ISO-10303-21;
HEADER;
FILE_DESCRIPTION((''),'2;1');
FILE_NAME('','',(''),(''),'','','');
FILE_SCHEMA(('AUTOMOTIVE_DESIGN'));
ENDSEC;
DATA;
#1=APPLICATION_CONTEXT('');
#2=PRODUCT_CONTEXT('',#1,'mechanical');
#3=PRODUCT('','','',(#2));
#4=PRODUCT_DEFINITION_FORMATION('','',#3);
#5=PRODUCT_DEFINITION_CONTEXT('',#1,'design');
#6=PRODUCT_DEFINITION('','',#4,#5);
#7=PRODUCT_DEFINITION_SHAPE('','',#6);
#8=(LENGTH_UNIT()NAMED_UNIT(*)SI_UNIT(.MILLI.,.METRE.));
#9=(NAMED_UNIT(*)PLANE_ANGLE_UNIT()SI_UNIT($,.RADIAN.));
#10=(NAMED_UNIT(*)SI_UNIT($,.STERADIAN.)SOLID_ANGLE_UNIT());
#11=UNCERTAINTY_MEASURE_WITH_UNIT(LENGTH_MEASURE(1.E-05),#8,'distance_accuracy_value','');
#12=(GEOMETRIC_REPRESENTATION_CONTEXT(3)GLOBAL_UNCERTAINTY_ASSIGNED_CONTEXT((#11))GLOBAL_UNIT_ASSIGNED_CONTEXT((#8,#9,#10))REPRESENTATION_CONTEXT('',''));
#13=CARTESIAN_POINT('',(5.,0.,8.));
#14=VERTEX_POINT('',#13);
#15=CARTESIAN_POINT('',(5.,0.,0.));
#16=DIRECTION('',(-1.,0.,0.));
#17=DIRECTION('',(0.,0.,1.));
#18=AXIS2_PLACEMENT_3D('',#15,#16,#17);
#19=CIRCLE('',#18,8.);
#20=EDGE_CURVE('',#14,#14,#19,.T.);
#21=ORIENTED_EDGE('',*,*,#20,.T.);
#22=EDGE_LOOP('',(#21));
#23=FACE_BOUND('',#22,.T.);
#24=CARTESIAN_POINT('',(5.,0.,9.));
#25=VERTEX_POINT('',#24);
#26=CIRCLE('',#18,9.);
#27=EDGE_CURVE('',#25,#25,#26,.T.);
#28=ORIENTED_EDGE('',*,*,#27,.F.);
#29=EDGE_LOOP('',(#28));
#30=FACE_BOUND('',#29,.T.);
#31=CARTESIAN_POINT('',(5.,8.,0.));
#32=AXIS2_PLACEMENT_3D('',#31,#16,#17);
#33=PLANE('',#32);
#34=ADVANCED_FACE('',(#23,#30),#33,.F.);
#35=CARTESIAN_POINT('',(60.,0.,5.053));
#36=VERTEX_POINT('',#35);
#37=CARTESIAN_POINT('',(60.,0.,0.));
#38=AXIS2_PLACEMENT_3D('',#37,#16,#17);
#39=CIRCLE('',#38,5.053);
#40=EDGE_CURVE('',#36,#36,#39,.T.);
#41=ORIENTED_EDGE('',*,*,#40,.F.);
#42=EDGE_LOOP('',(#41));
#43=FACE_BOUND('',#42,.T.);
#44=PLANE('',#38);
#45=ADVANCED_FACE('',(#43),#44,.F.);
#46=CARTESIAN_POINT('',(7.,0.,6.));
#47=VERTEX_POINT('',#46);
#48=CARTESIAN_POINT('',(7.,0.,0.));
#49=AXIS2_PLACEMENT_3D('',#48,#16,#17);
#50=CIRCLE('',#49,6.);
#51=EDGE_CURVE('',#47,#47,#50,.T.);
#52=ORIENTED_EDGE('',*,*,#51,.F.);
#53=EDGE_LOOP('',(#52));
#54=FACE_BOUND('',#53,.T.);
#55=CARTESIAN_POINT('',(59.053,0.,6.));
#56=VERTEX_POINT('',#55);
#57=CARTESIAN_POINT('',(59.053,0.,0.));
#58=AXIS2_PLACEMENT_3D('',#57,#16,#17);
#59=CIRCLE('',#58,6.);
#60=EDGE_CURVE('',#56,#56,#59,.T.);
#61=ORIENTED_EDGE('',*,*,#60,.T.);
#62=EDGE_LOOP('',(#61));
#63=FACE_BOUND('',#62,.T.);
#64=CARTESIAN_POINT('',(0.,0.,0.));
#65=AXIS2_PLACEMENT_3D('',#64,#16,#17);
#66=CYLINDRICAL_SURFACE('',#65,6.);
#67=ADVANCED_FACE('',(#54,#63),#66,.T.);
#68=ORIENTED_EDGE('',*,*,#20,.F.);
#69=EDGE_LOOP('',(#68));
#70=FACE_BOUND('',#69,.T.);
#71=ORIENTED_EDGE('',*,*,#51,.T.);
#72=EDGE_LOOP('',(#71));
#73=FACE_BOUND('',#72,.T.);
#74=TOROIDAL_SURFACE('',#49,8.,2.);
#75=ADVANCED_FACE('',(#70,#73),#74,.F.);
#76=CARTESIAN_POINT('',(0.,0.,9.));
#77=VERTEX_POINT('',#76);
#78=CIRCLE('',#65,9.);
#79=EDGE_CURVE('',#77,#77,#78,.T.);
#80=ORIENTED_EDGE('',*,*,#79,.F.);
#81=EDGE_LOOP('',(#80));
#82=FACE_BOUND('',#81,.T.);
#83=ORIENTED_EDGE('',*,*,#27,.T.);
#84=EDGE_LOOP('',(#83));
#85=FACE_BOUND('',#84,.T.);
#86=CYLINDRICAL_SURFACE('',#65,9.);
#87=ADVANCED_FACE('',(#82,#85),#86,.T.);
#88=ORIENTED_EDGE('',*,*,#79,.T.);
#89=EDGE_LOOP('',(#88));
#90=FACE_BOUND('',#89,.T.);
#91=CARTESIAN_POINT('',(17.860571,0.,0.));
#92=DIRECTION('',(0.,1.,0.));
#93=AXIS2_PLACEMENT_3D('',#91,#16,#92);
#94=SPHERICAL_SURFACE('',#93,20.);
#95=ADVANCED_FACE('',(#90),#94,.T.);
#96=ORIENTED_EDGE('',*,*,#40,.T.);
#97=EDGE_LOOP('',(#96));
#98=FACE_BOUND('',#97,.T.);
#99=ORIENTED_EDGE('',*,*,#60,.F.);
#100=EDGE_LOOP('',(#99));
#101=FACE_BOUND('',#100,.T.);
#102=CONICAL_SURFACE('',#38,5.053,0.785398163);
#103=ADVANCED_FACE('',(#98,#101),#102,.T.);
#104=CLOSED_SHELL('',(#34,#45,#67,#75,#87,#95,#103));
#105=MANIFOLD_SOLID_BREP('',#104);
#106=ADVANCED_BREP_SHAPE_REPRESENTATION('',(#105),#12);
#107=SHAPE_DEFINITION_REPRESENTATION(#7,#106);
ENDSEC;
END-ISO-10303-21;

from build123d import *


# Read off the part's stored shape, not the designer's step: M12 机械螺纹 螺柱1
with BuildPart() as part:
    # 草图1 → 旋转1 (revolve)
    with BuildSketch(Plane.XY, mode=Mode.PRIVATE) as revolve_1_sk:
        with BuildLine():
            Line((60, 0), (60, 6))
            Line((60, 6), (7, 6))
            ThreePointArc((7, 6), (5.585786438, 6.585786438), (5, 8))
            Line((5, 8), (5, 9))
            Line((5, 9), (0, 9))
            ThreePointArc((0, 9), (-1.597221966, 4.625396092), (-2.139428901, 0))
            Line((-2.139428901, 0), (60, 0))
        make_face()
    revolve(revolve_1_sk.sketch.rotate(Axis((0, 0, 0), (1, 0, 0)), 90), axis=Axis((0, 0, 0), (1, 0, 0)))

    # M12 机械螺纹 螺柱1 outline → M12 机械螺纹 螺柱1 (revolve, cut)
    with BuildSketch(Plane.YX):
        Polygon((6, 60), (5.053, 60), (6, 59.053), align=None)
    revolve(axis=Axis((0, 0, 0), (1, 0, 0)), mode=Mode.SUBTRACT)


solid = part.part
